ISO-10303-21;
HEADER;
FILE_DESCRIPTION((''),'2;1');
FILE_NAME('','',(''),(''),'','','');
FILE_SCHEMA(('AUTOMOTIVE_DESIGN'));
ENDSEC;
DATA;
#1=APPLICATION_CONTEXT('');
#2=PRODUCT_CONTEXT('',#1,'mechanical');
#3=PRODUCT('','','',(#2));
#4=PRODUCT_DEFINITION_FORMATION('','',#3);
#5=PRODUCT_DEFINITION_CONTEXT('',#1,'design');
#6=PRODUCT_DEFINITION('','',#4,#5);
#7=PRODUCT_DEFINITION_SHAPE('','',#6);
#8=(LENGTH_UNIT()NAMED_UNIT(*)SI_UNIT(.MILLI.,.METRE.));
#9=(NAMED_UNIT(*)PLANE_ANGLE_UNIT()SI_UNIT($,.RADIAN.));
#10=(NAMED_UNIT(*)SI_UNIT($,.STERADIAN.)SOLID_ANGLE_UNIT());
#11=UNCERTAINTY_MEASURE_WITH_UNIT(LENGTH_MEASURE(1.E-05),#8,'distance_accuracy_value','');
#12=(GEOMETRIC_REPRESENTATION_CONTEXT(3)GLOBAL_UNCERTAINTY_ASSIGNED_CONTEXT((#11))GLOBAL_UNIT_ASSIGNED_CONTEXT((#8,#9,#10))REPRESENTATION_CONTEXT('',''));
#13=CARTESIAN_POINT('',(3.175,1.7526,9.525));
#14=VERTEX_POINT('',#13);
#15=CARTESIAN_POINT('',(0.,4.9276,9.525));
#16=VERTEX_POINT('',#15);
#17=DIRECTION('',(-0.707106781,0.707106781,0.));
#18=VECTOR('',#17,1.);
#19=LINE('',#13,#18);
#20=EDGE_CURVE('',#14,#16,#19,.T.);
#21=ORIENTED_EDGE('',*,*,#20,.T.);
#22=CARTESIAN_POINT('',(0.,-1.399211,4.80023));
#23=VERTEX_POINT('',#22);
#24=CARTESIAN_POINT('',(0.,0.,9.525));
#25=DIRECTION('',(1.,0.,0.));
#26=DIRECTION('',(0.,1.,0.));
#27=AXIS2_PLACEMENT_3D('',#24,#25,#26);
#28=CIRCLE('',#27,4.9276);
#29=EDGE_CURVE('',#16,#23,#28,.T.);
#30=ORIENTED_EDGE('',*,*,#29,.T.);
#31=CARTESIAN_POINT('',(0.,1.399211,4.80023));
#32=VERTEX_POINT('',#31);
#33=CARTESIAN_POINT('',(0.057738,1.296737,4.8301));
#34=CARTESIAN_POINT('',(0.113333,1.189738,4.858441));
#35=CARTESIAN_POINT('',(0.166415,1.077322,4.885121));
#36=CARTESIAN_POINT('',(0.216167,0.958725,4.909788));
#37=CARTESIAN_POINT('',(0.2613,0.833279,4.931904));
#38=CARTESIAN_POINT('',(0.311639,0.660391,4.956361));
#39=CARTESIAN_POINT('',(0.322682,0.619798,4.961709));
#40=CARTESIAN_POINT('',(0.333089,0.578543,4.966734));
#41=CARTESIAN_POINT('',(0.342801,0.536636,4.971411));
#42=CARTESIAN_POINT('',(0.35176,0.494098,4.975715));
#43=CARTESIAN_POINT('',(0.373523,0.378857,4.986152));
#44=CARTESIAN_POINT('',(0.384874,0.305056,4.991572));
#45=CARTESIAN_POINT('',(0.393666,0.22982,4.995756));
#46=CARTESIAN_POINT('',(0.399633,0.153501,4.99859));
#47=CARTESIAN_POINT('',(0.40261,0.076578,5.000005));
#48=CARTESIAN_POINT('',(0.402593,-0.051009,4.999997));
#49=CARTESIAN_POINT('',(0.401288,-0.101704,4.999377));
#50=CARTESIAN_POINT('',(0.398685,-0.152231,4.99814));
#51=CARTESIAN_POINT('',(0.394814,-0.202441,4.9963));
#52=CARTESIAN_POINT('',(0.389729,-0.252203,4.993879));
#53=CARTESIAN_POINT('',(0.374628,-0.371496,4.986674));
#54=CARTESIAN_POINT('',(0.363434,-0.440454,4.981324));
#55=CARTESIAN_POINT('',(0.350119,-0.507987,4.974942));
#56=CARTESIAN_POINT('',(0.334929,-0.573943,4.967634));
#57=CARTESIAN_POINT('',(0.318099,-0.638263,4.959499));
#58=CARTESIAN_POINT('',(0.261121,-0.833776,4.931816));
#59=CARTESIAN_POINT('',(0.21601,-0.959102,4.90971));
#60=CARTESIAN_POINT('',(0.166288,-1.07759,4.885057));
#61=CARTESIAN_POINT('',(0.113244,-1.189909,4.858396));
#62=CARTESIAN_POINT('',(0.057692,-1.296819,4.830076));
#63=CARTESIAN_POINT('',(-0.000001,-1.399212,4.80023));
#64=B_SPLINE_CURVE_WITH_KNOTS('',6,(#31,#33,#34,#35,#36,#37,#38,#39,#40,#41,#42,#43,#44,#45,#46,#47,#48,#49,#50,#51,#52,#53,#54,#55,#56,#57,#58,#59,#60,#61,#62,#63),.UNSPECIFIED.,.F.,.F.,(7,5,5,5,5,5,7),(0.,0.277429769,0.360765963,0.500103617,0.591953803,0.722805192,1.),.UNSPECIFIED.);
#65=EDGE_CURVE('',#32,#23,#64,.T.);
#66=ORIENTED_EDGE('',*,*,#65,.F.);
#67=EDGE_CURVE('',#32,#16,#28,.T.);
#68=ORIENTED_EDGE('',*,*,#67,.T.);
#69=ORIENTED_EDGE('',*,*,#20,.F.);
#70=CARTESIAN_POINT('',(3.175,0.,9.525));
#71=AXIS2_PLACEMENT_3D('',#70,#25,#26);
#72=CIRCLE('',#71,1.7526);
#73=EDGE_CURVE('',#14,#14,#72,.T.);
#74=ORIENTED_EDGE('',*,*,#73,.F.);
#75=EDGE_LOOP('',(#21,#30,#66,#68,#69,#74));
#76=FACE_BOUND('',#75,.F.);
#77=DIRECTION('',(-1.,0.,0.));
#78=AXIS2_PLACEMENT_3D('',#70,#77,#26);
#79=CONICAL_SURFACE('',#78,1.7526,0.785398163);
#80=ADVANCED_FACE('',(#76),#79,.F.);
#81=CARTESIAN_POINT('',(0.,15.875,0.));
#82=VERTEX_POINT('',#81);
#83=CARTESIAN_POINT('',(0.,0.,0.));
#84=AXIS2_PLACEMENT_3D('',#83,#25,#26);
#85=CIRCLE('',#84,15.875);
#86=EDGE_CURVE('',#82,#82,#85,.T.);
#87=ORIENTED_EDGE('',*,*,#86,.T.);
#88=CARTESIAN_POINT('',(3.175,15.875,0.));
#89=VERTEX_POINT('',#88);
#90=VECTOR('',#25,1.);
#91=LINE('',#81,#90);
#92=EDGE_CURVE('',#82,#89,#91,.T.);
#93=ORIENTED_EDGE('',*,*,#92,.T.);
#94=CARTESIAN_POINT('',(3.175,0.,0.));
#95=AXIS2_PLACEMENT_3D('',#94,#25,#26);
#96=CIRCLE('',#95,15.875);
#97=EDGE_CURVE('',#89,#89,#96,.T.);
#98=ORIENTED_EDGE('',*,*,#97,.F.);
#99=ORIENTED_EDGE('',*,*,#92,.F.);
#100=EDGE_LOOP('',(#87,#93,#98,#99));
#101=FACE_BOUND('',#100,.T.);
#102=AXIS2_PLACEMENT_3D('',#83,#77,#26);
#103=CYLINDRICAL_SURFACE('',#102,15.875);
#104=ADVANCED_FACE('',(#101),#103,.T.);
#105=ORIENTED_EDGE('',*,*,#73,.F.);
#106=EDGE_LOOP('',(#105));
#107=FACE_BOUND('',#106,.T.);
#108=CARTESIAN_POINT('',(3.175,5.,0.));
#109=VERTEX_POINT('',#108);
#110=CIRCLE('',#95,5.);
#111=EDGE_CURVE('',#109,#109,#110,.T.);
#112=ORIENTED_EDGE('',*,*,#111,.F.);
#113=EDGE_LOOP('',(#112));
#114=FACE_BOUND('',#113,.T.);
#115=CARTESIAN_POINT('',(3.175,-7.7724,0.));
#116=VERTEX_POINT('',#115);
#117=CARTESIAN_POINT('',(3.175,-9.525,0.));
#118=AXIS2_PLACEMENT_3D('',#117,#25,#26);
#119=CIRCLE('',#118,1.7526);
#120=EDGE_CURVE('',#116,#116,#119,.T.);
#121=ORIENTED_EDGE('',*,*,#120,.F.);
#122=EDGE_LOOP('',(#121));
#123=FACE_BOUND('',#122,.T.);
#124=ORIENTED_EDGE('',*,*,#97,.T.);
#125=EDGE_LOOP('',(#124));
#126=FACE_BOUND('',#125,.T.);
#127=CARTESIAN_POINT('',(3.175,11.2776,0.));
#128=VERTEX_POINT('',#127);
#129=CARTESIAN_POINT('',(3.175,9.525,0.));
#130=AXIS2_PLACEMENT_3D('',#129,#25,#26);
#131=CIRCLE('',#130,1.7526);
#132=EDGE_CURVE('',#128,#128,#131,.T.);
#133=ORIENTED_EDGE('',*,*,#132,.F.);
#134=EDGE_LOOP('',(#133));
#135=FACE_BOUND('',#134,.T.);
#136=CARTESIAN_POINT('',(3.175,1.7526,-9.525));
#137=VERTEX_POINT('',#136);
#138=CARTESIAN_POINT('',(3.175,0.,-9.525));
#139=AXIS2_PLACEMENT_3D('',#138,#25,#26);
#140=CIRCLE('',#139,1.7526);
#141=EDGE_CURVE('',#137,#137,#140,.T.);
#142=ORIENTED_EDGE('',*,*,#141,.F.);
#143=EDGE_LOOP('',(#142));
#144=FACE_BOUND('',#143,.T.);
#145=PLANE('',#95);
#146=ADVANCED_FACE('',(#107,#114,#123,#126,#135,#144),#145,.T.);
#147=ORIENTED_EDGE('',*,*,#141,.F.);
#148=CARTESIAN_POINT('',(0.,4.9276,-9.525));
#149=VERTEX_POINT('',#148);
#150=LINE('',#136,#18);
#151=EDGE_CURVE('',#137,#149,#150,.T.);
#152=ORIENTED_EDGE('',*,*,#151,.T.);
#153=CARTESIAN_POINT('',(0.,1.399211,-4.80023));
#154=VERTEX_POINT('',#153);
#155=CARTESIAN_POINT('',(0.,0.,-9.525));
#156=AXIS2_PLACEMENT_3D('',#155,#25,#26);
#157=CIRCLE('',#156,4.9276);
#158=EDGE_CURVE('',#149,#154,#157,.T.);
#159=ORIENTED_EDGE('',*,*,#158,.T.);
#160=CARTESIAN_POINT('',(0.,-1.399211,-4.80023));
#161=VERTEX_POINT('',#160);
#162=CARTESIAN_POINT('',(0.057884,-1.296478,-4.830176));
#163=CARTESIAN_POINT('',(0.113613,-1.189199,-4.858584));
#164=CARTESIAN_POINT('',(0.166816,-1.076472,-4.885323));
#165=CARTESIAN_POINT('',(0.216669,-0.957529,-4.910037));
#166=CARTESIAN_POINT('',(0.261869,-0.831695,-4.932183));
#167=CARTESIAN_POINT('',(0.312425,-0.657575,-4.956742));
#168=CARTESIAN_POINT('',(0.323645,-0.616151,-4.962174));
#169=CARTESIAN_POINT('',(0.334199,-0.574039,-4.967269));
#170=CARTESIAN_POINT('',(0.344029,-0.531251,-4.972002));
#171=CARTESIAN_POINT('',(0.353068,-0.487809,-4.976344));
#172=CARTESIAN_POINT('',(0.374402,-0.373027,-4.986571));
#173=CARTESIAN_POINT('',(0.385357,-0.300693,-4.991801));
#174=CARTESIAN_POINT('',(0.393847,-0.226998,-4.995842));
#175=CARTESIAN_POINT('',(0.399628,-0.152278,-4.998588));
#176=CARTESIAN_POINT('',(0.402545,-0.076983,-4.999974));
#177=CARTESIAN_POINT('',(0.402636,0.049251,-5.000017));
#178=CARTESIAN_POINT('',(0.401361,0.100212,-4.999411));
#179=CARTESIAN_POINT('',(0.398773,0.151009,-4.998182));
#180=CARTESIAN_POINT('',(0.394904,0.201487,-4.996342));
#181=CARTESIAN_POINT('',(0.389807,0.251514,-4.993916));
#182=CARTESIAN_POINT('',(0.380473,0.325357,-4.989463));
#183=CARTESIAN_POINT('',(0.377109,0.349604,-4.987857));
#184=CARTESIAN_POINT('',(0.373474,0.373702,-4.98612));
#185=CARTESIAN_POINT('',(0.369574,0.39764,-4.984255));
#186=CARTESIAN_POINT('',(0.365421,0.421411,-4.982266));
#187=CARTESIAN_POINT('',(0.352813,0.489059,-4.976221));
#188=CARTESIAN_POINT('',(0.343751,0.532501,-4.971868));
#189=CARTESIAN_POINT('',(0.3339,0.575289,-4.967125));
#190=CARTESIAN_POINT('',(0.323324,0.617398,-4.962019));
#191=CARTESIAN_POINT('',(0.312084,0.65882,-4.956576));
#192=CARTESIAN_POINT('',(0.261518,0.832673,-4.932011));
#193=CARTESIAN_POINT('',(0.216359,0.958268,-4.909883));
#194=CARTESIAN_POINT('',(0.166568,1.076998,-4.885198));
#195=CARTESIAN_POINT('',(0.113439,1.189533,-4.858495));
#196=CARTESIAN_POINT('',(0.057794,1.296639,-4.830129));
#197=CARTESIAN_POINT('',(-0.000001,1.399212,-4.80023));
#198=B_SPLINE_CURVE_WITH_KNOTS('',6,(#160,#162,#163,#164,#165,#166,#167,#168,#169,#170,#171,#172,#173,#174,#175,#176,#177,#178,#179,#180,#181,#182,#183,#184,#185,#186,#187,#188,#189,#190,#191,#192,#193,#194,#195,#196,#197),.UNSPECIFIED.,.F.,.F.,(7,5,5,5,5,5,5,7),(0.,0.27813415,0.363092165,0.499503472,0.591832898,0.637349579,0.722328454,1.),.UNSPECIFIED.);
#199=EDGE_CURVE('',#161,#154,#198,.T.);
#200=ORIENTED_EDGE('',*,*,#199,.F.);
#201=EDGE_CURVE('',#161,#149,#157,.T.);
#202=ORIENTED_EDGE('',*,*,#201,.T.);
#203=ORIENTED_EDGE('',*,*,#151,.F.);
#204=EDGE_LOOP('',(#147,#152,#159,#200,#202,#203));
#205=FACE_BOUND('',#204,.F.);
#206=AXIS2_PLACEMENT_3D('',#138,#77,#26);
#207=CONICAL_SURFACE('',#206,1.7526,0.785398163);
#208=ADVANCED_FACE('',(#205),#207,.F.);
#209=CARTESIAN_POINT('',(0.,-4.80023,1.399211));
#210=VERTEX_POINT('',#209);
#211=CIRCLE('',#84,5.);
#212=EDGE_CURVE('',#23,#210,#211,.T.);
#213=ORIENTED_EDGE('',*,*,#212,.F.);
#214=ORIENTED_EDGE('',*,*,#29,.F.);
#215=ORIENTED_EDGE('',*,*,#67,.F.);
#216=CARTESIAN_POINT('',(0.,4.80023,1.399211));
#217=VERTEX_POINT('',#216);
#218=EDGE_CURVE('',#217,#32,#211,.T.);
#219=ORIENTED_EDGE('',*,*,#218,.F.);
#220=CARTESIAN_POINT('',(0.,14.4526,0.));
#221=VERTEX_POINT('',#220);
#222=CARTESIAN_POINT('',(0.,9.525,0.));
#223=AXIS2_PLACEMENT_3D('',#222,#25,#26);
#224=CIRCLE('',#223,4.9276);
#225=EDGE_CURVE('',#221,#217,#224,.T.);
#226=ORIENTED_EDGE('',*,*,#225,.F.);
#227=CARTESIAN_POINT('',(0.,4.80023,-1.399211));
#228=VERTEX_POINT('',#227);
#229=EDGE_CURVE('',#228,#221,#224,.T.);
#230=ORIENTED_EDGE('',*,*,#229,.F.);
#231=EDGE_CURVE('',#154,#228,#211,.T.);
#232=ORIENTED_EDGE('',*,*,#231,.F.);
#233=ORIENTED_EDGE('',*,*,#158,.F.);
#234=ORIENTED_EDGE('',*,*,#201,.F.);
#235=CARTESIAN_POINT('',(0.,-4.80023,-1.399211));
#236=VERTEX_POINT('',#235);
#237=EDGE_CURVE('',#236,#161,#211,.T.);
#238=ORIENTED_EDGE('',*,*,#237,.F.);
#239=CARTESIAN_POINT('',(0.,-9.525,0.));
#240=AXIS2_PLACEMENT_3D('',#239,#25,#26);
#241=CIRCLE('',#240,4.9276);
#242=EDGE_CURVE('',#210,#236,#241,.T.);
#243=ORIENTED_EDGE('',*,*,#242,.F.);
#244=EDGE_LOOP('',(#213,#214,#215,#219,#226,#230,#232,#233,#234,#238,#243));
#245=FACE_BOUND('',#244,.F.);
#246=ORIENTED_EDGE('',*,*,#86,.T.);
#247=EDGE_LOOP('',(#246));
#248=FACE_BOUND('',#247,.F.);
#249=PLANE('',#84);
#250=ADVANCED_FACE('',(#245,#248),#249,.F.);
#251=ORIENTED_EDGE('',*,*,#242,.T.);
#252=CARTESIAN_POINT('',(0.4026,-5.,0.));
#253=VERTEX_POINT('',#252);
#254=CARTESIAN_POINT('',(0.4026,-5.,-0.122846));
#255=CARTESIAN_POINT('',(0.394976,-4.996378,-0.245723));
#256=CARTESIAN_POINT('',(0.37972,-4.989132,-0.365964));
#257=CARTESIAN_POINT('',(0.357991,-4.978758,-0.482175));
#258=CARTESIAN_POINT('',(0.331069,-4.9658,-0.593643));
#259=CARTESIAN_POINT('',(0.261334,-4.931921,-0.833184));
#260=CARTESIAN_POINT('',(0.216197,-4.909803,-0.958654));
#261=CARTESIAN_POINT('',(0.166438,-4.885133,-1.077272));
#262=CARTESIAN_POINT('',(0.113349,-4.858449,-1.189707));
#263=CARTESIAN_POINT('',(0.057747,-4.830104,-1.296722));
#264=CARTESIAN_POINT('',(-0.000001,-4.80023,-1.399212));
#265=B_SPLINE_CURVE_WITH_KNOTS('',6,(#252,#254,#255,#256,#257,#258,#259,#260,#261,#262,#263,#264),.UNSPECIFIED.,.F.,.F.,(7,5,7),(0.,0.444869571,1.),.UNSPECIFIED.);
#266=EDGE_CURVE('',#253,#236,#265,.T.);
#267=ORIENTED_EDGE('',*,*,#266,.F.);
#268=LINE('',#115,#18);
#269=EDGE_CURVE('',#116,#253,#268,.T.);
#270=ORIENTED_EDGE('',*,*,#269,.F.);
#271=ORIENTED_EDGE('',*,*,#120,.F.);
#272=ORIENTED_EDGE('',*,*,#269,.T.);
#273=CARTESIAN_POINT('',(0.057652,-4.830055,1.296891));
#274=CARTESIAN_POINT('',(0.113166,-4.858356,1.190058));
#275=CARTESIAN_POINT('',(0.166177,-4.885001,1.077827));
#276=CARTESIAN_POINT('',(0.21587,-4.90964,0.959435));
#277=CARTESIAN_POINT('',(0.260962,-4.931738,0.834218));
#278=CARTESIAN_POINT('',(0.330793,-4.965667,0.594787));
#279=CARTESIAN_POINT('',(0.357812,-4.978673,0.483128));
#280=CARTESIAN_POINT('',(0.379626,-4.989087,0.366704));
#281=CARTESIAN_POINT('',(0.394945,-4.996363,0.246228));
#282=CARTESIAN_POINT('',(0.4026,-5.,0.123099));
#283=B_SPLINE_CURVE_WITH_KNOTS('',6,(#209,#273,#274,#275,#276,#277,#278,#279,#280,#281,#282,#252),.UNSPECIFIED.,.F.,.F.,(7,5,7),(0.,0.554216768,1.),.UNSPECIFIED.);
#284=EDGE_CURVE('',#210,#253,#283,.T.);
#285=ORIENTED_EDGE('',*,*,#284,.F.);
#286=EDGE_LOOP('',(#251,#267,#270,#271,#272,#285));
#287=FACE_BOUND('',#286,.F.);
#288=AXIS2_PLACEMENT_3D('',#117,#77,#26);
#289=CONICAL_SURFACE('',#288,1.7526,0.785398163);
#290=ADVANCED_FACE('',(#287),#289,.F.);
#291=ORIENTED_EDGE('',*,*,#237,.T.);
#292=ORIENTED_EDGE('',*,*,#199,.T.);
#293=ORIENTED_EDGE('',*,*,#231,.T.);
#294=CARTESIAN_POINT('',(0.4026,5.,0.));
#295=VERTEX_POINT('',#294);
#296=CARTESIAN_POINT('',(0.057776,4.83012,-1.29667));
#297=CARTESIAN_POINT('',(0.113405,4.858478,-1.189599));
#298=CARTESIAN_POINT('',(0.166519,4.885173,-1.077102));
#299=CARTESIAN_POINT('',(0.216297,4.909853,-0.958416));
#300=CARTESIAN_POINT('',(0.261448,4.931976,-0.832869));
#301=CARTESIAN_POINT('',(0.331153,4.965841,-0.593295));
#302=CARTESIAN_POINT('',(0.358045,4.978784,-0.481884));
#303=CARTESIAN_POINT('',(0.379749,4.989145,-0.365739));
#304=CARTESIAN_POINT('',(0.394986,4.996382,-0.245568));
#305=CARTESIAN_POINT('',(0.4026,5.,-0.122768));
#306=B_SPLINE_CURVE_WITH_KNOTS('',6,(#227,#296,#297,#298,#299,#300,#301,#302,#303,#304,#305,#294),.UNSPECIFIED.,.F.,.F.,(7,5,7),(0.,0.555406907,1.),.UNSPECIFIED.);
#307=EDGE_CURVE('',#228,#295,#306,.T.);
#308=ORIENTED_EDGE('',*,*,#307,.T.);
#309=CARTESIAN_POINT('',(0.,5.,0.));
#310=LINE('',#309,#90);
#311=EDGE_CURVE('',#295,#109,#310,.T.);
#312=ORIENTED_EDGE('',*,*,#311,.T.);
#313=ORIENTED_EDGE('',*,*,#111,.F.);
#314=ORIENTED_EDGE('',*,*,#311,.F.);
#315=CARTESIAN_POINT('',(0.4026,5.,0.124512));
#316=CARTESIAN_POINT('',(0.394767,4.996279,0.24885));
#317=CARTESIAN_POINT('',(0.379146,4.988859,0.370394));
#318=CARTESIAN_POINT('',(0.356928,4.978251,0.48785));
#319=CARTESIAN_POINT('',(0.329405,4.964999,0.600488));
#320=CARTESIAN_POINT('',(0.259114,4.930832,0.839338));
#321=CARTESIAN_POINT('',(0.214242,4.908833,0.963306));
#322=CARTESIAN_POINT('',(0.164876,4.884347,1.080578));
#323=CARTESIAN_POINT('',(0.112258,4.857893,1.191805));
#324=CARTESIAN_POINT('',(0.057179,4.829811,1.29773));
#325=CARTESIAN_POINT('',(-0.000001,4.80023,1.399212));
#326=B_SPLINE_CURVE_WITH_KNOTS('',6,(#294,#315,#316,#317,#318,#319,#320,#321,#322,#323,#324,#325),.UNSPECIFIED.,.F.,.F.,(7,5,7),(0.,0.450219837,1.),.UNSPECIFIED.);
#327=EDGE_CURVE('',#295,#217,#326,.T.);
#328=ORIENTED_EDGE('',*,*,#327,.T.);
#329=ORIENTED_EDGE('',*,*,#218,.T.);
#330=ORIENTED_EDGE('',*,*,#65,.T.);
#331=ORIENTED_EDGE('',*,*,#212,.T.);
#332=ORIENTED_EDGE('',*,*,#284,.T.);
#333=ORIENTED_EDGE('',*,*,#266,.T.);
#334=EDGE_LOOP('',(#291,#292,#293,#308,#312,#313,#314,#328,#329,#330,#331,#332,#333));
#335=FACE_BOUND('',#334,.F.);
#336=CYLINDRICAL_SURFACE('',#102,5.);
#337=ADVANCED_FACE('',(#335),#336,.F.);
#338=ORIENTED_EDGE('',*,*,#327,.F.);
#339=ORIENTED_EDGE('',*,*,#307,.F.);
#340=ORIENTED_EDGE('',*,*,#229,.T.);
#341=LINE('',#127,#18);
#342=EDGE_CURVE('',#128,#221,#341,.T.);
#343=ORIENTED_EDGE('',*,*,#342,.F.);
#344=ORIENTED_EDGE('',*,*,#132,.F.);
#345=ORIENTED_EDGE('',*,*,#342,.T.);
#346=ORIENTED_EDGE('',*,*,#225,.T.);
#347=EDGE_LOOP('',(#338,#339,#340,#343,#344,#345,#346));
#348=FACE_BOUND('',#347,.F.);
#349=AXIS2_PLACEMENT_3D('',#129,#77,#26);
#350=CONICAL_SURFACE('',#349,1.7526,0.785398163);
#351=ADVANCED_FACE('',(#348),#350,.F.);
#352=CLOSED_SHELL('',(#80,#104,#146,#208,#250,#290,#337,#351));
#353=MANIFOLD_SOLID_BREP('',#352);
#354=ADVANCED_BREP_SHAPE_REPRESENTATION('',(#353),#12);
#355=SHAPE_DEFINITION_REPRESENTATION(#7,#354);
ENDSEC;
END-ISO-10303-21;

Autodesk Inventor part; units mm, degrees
ref_plane "YZ Plane" through (0, 0, 0) normal (1, 0, 0) x (0, 1, 0)
ref_plane "XZ Plane" through (0, 0, 0) normal (0, 1, 0) x (-1, 0, 0)
ref_plane "XY Plane" through (0, 0, 0) normal (0, 0, 1) x (1, 0, 0)
sketch "Sketch1" plane through (0, 0, 0) normal (1, 0, 0) x (0, 1, 0)
  circle A0 centre (0, 0) radius 15.875
  line L0 (0, 0) -> (15.875, 0) construction
  circle A1 centre (9.525, 0) radius 1.7526
  circle A2 centre (0, 0) radius 9.525 construction
  circle A3 centre (0, 0) radius 5
  circle A4 centre (0, 9.525) radius 1.7526
  circle A5 centre (-9.525, 0) radius 1.7526
  circle A6 centre (0, -9.525) radius 1.7526
  dimension "d0" = 31.75
  dimension "d2" = 19.05
  dimension "d1" = 3.5052
  dimension "d3" = 10
  dimension "d6" = 360
extrude "Extrusion1" add sketch "Sketch1" along normal blind 3.175
chamfer "Chamfer1" distance 3.175 angle 45 4 edges at (0, 7.7724, 0) (0, -1.7526, -9.525) (0, -11.2776, 0) (0, -1.7526, 9.525)
properties part number "Spacer" material "UHMW, Black"
